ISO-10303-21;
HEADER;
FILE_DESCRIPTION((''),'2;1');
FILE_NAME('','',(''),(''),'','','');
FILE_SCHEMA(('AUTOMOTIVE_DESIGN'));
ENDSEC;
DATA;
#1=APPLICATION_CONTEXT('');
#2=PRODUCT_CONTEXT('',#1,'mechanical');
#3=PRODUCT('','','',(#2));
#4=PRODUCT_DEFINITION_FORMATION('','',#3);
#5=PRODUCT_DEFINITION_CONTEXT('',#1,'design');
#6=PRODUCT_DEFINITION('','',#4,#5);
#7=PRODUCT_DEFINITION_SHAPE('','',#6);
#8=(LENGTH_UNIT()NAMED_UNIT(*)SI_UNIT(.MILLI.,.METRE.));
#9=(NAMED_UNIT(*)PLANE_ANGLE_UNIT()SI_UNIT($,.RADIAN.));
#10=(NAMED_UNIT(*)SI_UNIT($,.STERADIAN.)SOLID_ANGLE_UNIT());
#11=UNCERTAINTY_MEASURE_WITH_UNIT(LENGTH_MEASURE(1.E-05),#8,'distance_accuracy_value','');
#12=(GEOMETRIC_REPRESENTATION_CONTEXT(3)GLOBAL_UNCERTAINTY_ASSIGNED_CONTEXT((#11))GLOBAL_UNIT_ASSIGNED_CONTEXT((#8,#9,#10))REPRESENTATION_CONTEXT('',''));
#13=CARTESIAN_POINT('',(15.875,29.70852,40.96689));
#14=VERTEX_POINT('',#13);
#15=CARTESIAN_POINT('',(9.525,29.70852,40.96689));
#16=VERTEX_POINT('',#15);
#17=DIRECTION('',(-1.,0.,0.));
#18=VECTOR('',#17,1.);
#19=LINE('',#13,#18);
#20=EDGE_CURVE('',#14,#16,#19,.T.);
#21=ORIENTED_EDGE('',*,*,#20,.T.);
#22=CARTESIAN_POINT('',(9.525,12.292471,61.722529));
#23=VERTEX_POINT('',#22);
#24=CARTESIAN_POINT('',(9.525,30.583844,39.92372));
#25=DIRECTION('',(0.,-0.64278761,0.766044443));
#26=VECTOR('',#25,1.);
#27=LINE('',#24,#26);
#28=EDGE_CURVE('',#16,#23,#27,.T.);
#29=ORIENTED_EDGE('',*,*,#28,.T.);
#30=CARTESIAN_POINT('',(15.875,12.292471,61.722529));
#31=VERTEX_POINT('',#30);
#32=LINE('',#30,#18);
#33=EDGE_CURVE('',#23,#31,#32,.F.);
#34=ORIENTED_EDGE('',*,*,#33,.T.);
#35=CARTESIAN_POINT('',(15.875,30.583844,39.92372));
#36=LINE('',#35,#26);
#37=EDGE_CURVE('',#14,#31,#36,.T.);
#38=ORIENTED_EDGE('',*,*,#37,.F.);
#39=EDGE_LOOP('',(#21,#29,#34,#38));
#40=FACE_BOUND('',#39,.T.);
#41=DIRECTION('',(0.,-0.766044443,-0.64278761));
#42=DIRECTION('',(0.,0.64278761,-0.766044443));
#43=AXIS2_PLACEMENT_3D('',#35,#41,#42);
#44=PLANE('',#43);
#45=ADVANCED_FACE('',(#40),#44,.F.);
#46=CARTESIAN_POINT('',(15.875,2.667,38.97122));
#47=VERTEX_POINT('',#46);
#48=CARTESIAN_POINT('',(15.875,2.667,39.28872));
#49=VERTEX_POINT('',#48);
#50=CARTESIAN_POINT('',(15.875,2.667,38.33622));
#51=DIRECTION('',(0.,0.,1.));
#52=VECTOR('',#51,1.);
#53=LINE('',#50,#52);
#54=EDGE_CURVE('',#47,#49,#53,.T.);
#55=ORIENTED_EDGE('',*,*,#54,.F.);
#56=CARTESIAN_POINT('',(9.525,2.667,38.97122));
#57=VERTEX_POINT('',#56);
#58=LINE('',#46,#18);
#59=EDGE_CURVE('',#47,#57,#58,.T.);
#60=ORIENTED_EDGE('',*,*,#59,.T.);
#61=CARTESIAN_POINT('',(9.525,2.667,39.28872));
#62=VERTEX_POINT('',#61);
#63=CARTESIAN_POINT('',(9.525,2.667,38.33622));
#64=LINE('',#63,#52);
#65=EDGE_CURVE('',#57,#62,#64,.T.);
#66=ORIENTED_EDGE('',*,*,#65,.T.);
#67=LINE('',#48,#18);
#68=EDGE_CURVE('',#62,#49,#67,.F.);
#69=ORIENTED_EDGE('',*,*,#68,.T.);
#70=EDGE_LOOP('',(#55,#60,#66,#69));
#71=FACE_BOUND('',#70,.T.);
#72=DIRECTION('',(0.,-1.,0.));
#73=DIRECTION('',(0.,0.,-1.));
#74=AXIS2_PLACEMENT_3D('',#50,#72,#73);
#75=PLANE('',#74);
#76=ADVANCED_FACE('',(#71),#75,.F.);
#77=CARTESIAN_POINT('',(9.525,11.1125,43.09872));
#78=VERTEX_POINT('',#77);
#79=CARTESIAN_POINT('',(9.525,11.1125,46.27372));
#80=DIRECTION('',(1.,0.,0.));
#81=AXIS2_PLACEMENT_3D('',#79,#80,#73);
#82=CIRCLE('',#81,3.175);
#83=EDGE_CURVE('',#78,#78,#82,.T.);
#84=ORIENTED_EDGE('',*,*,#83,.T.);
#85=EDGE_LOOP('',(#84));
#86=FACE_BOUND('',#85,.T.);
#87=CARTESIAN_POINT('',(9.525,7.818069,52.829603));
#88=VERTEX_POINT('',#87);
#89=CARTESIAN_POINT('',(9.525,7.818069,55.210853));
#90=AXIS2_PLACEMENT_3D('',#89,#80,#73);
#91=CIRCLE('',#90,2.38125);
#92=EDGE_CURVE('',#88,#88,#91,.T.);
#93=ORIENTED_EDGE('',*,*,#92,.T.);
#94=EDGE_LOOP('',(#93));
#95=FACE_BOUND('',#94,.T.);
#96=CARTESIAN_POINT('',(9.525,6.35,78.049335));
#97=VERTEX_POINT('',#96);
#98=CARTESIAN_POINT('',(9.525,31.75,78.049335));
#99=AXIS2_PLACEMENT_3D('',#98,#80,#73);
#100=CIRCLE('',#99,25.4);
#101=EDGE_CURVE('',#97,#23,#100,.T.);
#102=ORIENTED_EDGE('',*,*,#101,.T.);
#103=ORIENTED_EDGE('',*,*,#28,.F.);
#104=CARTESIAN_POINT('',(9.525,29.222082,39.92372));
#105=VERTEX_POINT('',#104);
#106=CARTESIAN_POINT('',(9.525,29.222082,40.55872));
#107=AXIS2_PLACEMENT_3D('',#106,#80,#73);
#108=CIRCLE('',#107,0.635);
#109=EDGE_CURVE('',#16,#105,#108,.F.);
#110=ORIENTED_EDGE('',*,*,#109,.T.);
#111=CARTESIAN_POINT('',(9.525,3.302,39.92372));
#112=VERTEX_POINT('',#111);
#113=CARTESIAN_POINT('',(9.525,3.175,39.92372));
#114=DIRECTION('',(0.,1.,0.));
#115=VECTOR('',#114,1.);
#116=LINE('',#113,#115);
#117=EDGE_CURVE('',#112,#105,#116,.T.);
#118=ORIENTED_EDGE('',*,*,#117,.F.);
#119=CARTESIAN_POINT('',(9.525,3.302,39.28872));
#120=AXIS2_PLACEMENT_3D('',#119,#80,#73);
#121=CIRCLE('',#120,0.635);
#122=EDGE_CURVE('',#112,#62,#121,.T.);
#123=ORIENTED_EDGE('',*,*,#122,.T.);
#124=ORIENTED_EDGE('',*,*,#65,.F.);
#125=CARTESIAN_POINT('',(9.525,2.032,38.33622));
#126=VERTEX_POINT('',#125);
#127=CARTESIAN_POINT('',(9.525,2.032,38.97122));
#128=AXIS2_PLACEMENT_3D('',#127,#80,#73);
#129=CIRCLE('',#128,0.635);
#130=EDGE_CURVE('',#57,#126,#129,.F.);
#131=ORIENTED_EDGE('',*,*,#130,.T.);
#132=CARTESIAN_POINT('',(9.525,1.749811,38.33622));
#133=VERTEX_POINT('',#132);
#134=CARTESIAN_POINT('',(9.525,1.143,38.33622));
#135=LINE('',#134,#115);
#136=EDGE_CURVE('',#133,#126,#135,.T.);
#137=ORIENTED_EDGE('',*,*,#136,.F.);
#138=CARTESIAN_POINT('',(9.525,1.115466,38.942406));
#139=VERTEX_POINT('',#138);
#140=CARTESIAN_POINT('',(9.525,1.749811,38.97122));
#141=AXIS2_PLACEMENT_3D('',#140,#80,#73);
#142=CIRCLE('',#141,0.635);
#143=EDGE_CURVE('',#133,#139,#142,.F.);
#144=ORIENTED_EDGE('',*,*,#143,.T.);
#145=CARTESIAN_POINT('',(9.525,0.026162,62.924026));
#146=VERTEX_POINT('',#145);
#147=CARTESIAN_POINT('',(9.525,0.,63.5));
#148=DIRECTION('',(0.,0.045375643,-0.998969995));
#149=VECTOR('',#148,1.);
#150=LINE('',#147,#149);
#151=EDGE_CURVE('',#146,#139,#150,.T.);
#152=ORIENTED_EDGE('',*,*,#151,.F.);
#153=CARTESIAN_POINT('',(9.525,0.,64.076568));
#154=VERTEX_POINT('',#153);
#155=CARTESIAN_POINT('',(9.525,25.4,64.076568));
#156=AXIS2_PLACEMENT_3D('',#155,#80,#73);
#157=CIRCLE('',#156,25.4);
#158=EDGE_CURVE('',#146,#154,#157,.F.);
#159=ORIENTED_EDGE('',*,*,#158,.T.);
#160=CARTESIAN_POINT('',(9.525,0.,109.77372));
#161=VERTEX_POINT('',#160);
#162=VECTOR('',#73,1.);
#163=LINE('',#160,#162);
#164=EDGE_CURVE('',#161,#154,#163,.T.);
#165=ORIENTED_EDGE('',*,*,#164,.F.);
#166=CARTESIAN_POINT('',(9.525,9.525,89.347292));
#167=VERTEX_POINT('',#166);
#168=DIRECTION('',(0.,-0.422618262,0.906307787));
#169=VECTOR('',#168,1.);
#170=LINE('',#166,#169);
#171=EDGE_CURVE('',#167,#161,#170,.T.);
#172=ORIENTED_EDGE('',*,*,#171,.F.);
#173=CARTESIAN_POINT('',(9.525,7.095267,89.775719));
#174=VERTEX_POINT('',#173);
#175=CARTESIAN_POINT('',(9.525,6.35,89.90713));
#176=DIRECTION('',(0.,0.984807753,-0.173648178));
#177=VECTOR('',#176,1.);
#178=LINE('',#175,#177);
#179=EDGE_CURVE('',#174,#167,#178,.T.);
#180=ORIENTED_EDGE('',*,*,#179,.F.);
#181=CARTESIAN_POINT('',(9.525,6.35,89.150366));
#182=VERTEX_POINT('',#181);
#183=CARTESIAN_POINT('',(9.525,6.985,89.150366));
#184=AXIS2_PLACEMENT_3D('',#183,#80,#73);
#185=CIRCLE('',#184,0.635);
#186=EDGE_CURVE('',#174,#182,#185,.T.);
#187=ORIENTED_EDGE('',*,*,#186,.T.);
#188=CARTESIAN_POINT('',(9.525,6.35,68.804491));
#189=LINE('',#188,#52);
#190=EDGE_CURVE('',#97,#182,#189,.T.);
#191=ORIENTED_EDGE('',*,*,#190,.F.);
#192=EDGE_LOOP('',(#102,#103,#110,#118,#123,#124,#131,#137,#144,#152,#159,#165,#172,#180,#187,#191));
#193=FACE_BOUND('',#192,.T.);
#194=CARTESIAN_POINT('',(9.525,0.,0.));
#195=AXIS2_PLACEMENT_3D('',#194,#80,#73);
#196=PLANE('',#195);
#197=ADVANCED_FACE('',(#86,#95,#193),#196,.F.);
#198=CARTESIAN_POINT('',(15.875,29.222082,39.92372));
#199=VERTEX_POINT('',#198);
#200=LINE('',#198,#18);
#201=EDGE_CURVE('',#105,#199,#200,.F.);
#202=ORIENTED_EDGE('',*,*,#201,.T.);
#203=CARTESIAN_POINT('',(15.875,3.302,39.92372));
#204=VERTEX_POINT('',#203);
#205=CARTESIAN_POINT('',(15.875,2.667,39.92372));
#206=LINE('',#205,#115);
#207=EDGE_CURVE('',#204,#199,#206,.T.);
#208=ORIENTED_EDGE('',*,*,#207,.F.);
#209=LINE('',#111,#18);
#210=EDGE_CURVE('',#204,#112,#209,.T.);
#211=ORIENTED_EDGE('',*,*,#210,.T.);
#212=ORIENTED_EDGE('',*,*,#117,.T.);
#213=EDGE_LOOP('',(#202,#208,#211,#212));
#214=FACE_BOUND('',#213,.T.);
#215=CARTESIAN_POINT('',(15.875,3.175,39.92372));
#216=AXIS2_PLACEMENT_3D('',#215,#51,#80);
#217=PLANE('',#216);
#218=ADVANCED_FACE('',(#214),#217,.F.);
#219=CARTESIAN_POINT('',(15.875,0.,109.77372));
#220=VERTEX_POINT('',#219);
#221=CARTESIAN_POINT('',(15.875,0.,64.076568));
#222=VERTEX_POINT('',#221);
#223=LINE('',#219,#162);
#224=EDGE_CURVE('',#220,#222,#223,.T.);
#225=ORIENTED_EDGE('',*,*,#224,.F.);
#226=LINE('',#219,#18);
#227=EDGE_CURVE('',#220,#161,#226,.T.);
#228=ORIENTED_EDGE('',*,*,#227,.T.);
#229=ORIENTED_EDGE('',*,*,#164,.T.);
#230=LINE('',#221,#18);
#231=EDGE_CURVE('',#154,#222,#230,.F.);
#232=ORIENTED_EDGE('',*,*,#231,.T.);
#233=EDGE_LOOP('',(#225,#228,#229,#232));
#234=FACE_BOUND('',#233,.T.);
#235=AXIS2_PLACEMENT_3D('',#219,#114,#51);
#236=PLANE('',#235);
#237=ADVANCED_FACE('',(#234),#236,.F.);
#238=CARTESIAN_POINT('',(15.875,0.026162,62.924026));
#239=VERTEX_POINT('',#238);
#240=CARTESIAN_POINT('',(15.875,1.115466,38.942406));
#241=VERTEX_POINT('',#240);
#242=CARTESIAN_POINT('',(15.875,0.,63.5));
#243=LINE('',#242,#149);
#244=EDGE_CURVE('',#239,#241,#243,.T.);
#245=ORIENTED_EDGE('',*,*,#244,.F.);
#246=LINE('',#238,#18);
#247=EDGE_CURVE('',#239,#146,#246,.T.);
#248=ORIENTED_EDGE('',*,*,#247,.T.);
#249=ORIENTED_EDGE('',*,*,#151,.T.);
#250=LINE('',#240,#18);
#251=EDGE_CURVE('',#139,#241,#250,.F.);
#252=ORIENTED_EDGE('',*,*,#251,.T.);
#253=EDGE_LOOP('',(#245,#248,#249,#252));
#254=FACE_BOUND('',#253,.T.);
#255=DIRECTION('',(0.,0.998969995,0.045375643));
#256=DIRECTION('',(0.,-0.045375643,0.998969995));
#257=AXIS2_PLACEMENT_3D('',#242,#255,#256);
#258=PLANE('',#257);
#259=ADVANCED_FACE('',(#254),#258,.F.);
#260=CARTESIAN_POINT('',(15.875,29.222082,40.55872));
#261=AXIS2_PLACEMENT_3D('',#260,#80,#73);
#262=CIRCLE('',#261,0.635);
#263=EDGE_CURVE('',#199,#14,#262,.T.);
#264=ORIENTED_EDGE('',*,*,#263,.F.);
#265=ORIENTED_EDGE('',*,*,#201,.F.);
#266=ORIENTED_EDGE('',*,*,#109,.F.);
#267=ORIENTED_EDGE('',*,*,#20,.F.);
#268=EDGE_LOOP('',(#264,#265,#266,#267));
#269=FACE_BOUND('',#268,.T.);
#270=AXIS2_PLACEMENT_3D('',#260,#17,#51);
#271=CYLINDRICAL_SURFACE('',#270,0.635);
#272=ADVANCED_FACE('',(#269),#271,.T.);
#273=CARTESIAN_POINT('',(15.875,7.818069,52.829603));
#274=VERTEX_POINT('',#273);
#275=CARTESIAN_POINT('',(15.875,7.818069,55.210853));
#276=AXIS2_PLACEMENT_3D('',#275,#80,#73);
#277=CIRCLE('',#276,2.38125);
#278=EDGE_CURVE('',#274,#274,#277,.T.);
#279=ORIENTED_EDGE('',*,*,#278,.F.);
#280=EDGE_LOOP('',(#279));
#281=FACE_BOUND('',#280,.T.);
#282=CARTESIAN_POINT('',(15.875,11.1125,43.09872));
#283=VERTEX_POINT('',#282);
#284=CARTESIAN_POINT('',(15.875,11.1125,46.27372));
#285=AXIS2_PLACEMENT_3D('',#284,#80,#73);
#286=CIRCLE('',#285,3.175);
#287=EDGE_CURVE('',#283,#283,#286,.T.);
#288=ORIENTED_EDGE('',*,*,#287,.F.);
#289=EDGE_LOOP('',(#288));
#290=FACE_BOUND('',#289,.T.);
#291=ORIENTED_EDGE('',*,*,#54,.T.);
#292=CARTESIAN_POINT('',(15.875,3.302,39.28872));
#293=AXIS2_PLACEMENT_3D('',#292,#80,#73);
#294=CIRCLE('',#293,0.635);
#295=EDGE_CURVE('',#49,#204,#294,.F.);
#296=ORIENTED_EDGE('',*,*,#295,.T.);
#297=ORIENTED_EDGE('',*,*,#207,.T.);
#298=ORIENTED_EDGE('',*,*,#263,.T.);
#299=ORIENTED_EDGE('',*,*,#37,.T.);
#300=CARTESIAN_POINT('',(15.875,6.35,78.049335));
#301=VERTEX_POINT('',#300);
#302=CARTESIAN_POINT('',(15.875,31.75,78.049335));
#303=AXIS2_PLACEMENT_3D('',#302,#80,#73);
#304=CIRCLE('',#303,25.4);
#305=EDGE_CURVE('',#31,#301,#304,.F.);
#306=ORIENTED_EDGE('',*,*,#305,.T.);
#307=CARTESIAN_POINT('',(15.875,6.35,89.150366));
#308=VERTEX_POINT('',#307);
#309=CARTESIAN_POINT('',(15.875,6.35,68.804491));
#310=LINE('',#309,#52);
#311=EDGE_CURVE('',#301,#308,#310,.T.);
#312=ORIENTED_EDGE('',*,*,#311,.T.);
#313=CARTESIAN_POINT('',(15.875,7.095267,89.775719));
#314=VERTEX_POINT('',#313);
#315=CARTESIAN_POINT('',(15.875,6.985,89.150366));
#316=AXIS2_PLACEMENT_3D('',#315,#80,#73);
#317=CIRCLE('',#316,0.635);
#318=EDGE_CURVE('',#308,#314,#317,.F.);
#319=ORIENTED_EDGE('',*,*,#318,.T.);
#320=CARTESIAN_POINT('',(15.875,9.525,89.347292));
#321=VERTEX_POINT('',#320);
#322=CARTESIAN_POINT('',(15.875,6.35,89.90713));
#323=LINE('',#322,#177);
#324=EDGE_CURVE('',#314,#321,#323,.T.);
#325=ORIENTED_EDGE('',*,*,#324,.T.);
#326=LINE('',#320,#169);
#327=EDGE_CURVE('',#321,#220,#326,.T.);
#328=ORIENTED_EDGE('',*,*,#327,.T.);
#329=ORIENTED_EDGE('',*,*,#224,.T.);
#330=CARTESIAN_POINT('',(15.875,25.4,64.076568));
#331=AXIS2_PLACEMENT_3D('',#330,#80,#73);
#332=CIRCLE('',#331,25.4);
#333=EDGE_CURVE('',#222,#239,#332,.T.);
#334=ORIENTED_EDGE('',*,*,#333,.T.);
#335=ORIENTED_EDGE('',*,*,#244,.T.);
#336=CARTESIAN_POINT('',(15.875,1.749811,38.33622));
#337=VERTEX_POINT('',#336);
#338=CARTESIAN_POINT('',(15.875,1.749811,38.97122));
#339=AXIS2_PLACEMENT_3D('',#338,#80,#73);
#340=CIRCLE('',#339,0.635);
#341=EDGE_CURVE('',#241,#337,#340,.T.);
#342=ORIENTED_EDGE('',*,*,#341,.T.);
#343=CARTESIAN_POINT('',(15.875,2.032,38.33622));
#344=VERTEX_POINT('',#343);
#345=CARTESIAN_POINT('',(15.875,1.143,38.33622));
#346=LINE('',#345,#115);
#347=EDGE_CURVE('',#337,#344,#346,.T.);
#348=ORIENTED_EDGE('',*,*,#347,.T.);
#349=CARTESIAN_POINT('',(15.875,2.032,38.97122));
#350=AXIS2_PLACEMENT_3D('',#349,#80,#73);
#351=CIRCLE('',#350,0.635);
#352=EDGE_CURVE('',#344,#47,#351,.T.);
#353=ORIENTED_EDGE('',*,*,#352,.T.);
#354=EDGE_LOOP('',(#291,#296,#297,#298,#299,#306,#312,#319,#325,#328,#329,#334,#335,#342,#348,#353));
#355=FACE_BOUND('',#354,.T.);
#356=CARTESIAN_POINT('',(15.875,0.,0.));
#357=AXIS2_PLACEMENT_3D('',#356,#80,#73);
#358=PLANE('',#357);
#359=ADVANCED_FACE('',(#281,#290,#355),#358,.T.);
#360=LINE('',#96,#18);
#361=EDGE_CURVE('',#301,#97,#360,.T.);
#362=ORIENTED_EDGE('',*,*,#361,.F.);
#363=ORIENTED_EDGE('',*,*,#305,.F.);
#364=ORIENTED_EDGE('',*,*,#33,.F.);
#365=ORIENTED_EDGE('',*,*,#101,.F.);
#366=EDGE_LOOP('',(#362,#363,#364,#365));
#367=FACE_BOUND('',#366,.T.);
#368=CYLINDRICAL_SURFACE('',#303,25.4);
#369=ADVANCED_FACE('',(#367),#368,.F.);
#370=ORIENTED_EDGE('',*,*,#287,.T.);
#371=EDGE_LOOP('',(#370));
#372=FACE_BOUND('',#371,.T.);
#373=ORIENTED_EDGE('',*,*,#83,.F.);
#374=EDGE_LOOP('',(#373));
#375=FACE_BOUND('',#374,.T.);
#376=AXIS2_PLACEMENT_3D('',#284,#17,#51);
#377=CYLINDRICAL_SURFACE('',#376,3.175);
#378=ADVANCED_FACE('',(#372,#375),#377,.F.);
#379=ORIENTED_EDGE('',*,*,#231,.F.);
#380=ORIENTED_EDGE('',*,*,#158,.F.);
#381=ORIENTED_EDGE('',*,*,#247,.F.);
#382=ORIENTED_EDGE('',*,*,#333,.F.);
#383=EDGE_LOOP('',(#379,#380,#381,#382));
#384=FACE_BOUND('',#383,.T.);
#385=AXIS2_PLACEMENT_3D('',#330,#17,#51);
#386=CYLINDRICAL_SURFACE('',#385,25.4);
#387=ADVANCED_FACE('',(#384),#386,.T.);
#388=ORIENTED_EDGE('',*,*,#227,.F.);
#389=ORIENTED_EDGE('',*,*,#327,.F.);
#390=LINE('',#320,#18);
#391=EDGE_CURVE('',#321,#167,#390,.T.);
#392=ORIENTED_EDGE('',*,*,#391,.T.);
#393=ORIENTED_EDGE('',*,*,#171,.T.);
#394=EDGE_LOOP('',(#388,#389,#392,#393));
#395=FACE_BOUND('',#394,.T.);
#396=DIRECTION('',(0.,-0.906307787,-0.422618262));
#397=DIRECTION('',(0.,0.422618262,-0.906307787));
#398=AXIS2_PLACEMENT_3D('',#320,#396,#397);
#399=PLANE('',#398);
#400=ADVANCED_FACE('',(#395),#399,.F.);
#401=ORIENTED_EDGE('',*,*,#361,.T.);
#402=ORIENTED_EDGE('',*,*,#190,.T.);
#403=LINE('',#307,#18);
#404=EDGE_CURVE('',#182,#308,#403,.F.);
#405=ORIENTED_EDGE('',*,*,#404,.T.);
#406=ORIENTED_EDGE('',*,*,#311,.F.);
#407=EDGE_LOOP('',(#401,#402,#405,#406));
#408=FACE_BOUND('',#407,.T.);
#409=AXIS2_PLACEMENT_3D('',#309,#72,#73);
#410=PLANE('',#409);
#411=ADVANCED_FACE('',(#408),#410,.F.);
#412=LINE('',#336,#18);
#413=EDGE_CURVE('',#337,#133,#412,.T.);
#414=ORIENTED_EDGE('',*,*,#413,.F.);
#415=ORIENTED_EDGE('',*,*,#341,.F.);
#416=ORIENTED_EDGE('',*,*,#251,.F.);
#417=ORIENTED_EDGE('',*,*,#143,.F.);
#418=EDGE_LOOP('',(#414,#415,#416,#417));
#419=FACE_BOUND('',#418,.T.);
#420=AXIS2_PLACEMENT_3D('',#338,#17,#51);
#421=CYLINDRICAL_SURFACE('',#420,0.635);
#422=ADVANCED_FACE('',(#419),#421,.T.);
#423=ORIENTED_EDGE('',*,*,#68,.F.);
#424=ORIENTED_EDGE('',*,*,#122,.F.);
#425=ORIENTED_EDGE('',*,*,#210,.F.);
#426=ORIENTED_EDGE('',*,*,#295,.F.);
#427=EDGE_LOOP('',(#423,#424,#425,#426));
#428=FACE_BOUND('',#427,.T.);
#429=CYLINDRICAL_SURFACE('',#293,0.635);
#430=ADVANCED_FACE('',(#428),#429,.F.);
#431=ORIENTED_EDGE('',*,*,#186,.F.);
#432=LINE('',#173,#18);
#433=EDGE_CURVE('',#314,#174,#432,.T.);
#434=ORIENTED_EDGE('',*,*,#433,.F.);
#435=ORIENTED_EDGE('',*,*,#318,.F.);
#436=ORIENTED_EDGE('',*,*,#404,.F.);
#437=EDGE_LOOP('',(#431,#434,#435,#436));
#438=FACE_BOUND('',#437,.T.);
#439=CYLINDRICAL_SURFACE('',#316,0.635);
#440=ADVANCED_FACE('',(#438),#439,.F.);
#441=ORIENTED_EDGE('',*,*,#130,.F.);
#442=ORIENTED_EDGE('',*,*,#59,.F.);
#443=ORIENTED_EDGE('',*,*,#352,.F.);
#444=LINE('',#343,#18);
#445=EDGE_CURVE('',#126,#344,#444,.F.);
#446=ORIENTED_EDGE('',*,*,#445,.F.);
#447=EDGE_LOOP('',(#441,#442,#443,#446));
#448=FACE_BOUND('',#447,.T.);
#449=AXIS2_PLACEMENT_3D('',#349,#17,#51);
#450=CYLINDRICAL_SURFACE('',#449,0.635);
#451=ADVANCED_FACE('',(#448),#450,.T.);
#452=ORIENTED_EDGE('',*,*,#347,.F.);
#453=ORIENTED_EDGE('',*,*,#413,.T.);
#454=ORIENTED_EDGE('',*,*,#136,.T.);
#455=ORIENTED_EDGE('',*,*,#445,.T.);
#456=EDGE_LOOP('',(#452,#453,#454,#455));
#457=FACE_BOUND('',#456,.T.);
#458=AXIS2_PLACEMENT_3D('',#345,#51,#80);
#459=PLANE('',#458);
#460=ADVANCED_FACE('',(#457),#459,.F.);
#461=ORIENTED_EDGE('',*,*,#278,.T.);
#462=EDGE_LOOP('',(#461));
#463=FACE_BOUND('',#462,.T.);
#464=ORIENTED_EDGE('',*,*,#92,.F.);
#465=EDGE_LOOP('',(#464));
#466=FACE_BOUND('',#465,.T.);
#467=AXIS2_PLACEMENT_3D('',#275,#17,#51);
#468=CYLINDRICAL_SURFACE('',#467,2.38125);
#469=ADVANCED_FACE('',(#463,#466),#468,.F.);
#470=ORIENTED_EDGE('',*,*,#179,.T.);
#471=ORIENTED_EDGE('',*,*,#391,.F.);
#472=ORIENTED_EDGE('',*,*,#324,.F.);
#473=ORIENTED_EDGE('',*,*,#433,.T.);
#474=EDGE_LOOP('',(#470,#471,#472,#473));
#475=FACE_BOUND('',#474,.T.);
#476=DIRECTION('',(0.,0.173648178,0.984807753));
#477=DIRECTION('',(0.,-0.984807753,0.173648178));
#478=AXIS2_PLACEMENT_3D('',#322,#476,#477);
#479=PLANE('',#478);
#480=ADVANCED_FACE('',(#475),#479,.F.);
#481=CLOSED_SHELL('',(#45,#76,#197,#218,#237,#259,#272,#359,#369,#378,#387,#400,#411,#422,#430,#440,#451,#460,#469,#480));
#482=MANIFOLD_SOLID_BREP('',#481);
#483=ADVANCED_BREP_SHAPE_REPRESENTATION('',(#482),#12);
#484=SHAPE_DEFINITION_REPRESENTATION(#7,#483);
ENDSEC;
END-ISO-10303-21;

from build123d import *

# Parameters (mm, degrees)
STOCK_BEE_ZERKER_START                       = 9.525
STOCK_BEE_ZERKER_2_0_MULTIBODY_1_OUTLINE_R   = 3.175
STOCK_BEE_ZERKER_2_0_MULTIBODY_1_OUTLINE_R_2 = 2.38125
STOCK_BEE_ZERKER_2_0_MULTIBODY_1_DEPTH       = 6.35
FILLET1_R                                    = 0.635
FILLET2_R                                    = 25.4


# Read off the part's stored shape, not the designer's step: Stock-Bee-zerker 2.0 Multibody-1
with BuildPart() as part:
    # Stock-Bee-zerker 2.0 Multibody-1 outline → Stock-Bee-zerker 2.0 Multibody-1 (new body)
    with BuildSketch(Plane.YZ.offset(STOCK_BEE_ZERKER_START)):
        Polygon((0, 63.5), (1.143, 38.33622), (2.667, 38.33622), (2.667, 39.92372), (30.58384403, 39.92372), (6.35, 68.804490685), (6.35, 89.907129746), (9.525, 89.347291582), (0, 109.77372), align=None)
        with Locations((11.1125, 46.27372)):
            Circle(STOCK_BEE_ZERKER_2_0_MULTIBODY_1_OUTLINE_R, mode=Mode.SUBTRACT)
        with Locations((7.818068754, 55.210853084)):
            Circle(STOCK_BEE_ZERKER_2_0_MULTIBODY_1_OUTLINE_R_2, mode=Mode.SUBTRACT)
    extrude(amount=STOCK_BEE_ZERKER_2_0_MULTIBODY_1_DEPTH)

    # Fillet1
    fillet1_edges = [part.edges().sort_by_distance(p)[0] for p in [
        (12.7, 6.35, 89.907129746),
        (12.7, 30.58384403, 39.92372),
        (12.7, 2.667, 39.92372),
        (12.7, 2.667, 38.33622),
        (12.7, 1.143, 38.33622),
    ]]
    fillet(fillet1_edges, radius=FILLET1_R)

    # Fillet2
    # the kernel refuses this fillet: 25.4 mm, written as the material it adds along each edge
    with BuildSketch(Plane(origin=(9.525, 6.35, 68.804490685), x_dir=(0, 0, 1), z_dir=(1, 0, 0))) as fillet2_piece_1:
        with BuildLine():
            CenterArc((FILLET2_R * 0.363970234267, -FILLET2_R), FILLET2_R, 90, 40)
            Line((-FILLET2_R * 0.278817375421, -FILLET2_R * 0.233955556882), (0, 0))
            Line((0, 0), (FILLET2_R * 0.363970234267, 0))
        make_face()
    extrude(amount=6.35)
    # the kernel refuses this fillet: 25.4 mm, written as the material it takes off along each edge
    with BuildSketch(Plane(origin=(8.083580992, 0, 63.5), x_dir=(0, 0.0453756432593108, -0.9989699950442975), z_dir=(1, 0, 0))) as fillet2_2_piece_1:
        with BuildLine():
            CenterArc((FILLET2_R * 0.0226995119346, FILLET2_R), FILLET2_R, 267.399274167, 2.600725833)
            Line((-FILLET2_R * 0.0226761313248, FILLET2_R * 0.0010300049557), (0, 0))
            Line((0, 0), (FILLET2_R * 0.0226995119345, 0))
        make_face()
    extrude(amount=9.232838016, mode=Mode.SUBTRACT)


solid = part.part
